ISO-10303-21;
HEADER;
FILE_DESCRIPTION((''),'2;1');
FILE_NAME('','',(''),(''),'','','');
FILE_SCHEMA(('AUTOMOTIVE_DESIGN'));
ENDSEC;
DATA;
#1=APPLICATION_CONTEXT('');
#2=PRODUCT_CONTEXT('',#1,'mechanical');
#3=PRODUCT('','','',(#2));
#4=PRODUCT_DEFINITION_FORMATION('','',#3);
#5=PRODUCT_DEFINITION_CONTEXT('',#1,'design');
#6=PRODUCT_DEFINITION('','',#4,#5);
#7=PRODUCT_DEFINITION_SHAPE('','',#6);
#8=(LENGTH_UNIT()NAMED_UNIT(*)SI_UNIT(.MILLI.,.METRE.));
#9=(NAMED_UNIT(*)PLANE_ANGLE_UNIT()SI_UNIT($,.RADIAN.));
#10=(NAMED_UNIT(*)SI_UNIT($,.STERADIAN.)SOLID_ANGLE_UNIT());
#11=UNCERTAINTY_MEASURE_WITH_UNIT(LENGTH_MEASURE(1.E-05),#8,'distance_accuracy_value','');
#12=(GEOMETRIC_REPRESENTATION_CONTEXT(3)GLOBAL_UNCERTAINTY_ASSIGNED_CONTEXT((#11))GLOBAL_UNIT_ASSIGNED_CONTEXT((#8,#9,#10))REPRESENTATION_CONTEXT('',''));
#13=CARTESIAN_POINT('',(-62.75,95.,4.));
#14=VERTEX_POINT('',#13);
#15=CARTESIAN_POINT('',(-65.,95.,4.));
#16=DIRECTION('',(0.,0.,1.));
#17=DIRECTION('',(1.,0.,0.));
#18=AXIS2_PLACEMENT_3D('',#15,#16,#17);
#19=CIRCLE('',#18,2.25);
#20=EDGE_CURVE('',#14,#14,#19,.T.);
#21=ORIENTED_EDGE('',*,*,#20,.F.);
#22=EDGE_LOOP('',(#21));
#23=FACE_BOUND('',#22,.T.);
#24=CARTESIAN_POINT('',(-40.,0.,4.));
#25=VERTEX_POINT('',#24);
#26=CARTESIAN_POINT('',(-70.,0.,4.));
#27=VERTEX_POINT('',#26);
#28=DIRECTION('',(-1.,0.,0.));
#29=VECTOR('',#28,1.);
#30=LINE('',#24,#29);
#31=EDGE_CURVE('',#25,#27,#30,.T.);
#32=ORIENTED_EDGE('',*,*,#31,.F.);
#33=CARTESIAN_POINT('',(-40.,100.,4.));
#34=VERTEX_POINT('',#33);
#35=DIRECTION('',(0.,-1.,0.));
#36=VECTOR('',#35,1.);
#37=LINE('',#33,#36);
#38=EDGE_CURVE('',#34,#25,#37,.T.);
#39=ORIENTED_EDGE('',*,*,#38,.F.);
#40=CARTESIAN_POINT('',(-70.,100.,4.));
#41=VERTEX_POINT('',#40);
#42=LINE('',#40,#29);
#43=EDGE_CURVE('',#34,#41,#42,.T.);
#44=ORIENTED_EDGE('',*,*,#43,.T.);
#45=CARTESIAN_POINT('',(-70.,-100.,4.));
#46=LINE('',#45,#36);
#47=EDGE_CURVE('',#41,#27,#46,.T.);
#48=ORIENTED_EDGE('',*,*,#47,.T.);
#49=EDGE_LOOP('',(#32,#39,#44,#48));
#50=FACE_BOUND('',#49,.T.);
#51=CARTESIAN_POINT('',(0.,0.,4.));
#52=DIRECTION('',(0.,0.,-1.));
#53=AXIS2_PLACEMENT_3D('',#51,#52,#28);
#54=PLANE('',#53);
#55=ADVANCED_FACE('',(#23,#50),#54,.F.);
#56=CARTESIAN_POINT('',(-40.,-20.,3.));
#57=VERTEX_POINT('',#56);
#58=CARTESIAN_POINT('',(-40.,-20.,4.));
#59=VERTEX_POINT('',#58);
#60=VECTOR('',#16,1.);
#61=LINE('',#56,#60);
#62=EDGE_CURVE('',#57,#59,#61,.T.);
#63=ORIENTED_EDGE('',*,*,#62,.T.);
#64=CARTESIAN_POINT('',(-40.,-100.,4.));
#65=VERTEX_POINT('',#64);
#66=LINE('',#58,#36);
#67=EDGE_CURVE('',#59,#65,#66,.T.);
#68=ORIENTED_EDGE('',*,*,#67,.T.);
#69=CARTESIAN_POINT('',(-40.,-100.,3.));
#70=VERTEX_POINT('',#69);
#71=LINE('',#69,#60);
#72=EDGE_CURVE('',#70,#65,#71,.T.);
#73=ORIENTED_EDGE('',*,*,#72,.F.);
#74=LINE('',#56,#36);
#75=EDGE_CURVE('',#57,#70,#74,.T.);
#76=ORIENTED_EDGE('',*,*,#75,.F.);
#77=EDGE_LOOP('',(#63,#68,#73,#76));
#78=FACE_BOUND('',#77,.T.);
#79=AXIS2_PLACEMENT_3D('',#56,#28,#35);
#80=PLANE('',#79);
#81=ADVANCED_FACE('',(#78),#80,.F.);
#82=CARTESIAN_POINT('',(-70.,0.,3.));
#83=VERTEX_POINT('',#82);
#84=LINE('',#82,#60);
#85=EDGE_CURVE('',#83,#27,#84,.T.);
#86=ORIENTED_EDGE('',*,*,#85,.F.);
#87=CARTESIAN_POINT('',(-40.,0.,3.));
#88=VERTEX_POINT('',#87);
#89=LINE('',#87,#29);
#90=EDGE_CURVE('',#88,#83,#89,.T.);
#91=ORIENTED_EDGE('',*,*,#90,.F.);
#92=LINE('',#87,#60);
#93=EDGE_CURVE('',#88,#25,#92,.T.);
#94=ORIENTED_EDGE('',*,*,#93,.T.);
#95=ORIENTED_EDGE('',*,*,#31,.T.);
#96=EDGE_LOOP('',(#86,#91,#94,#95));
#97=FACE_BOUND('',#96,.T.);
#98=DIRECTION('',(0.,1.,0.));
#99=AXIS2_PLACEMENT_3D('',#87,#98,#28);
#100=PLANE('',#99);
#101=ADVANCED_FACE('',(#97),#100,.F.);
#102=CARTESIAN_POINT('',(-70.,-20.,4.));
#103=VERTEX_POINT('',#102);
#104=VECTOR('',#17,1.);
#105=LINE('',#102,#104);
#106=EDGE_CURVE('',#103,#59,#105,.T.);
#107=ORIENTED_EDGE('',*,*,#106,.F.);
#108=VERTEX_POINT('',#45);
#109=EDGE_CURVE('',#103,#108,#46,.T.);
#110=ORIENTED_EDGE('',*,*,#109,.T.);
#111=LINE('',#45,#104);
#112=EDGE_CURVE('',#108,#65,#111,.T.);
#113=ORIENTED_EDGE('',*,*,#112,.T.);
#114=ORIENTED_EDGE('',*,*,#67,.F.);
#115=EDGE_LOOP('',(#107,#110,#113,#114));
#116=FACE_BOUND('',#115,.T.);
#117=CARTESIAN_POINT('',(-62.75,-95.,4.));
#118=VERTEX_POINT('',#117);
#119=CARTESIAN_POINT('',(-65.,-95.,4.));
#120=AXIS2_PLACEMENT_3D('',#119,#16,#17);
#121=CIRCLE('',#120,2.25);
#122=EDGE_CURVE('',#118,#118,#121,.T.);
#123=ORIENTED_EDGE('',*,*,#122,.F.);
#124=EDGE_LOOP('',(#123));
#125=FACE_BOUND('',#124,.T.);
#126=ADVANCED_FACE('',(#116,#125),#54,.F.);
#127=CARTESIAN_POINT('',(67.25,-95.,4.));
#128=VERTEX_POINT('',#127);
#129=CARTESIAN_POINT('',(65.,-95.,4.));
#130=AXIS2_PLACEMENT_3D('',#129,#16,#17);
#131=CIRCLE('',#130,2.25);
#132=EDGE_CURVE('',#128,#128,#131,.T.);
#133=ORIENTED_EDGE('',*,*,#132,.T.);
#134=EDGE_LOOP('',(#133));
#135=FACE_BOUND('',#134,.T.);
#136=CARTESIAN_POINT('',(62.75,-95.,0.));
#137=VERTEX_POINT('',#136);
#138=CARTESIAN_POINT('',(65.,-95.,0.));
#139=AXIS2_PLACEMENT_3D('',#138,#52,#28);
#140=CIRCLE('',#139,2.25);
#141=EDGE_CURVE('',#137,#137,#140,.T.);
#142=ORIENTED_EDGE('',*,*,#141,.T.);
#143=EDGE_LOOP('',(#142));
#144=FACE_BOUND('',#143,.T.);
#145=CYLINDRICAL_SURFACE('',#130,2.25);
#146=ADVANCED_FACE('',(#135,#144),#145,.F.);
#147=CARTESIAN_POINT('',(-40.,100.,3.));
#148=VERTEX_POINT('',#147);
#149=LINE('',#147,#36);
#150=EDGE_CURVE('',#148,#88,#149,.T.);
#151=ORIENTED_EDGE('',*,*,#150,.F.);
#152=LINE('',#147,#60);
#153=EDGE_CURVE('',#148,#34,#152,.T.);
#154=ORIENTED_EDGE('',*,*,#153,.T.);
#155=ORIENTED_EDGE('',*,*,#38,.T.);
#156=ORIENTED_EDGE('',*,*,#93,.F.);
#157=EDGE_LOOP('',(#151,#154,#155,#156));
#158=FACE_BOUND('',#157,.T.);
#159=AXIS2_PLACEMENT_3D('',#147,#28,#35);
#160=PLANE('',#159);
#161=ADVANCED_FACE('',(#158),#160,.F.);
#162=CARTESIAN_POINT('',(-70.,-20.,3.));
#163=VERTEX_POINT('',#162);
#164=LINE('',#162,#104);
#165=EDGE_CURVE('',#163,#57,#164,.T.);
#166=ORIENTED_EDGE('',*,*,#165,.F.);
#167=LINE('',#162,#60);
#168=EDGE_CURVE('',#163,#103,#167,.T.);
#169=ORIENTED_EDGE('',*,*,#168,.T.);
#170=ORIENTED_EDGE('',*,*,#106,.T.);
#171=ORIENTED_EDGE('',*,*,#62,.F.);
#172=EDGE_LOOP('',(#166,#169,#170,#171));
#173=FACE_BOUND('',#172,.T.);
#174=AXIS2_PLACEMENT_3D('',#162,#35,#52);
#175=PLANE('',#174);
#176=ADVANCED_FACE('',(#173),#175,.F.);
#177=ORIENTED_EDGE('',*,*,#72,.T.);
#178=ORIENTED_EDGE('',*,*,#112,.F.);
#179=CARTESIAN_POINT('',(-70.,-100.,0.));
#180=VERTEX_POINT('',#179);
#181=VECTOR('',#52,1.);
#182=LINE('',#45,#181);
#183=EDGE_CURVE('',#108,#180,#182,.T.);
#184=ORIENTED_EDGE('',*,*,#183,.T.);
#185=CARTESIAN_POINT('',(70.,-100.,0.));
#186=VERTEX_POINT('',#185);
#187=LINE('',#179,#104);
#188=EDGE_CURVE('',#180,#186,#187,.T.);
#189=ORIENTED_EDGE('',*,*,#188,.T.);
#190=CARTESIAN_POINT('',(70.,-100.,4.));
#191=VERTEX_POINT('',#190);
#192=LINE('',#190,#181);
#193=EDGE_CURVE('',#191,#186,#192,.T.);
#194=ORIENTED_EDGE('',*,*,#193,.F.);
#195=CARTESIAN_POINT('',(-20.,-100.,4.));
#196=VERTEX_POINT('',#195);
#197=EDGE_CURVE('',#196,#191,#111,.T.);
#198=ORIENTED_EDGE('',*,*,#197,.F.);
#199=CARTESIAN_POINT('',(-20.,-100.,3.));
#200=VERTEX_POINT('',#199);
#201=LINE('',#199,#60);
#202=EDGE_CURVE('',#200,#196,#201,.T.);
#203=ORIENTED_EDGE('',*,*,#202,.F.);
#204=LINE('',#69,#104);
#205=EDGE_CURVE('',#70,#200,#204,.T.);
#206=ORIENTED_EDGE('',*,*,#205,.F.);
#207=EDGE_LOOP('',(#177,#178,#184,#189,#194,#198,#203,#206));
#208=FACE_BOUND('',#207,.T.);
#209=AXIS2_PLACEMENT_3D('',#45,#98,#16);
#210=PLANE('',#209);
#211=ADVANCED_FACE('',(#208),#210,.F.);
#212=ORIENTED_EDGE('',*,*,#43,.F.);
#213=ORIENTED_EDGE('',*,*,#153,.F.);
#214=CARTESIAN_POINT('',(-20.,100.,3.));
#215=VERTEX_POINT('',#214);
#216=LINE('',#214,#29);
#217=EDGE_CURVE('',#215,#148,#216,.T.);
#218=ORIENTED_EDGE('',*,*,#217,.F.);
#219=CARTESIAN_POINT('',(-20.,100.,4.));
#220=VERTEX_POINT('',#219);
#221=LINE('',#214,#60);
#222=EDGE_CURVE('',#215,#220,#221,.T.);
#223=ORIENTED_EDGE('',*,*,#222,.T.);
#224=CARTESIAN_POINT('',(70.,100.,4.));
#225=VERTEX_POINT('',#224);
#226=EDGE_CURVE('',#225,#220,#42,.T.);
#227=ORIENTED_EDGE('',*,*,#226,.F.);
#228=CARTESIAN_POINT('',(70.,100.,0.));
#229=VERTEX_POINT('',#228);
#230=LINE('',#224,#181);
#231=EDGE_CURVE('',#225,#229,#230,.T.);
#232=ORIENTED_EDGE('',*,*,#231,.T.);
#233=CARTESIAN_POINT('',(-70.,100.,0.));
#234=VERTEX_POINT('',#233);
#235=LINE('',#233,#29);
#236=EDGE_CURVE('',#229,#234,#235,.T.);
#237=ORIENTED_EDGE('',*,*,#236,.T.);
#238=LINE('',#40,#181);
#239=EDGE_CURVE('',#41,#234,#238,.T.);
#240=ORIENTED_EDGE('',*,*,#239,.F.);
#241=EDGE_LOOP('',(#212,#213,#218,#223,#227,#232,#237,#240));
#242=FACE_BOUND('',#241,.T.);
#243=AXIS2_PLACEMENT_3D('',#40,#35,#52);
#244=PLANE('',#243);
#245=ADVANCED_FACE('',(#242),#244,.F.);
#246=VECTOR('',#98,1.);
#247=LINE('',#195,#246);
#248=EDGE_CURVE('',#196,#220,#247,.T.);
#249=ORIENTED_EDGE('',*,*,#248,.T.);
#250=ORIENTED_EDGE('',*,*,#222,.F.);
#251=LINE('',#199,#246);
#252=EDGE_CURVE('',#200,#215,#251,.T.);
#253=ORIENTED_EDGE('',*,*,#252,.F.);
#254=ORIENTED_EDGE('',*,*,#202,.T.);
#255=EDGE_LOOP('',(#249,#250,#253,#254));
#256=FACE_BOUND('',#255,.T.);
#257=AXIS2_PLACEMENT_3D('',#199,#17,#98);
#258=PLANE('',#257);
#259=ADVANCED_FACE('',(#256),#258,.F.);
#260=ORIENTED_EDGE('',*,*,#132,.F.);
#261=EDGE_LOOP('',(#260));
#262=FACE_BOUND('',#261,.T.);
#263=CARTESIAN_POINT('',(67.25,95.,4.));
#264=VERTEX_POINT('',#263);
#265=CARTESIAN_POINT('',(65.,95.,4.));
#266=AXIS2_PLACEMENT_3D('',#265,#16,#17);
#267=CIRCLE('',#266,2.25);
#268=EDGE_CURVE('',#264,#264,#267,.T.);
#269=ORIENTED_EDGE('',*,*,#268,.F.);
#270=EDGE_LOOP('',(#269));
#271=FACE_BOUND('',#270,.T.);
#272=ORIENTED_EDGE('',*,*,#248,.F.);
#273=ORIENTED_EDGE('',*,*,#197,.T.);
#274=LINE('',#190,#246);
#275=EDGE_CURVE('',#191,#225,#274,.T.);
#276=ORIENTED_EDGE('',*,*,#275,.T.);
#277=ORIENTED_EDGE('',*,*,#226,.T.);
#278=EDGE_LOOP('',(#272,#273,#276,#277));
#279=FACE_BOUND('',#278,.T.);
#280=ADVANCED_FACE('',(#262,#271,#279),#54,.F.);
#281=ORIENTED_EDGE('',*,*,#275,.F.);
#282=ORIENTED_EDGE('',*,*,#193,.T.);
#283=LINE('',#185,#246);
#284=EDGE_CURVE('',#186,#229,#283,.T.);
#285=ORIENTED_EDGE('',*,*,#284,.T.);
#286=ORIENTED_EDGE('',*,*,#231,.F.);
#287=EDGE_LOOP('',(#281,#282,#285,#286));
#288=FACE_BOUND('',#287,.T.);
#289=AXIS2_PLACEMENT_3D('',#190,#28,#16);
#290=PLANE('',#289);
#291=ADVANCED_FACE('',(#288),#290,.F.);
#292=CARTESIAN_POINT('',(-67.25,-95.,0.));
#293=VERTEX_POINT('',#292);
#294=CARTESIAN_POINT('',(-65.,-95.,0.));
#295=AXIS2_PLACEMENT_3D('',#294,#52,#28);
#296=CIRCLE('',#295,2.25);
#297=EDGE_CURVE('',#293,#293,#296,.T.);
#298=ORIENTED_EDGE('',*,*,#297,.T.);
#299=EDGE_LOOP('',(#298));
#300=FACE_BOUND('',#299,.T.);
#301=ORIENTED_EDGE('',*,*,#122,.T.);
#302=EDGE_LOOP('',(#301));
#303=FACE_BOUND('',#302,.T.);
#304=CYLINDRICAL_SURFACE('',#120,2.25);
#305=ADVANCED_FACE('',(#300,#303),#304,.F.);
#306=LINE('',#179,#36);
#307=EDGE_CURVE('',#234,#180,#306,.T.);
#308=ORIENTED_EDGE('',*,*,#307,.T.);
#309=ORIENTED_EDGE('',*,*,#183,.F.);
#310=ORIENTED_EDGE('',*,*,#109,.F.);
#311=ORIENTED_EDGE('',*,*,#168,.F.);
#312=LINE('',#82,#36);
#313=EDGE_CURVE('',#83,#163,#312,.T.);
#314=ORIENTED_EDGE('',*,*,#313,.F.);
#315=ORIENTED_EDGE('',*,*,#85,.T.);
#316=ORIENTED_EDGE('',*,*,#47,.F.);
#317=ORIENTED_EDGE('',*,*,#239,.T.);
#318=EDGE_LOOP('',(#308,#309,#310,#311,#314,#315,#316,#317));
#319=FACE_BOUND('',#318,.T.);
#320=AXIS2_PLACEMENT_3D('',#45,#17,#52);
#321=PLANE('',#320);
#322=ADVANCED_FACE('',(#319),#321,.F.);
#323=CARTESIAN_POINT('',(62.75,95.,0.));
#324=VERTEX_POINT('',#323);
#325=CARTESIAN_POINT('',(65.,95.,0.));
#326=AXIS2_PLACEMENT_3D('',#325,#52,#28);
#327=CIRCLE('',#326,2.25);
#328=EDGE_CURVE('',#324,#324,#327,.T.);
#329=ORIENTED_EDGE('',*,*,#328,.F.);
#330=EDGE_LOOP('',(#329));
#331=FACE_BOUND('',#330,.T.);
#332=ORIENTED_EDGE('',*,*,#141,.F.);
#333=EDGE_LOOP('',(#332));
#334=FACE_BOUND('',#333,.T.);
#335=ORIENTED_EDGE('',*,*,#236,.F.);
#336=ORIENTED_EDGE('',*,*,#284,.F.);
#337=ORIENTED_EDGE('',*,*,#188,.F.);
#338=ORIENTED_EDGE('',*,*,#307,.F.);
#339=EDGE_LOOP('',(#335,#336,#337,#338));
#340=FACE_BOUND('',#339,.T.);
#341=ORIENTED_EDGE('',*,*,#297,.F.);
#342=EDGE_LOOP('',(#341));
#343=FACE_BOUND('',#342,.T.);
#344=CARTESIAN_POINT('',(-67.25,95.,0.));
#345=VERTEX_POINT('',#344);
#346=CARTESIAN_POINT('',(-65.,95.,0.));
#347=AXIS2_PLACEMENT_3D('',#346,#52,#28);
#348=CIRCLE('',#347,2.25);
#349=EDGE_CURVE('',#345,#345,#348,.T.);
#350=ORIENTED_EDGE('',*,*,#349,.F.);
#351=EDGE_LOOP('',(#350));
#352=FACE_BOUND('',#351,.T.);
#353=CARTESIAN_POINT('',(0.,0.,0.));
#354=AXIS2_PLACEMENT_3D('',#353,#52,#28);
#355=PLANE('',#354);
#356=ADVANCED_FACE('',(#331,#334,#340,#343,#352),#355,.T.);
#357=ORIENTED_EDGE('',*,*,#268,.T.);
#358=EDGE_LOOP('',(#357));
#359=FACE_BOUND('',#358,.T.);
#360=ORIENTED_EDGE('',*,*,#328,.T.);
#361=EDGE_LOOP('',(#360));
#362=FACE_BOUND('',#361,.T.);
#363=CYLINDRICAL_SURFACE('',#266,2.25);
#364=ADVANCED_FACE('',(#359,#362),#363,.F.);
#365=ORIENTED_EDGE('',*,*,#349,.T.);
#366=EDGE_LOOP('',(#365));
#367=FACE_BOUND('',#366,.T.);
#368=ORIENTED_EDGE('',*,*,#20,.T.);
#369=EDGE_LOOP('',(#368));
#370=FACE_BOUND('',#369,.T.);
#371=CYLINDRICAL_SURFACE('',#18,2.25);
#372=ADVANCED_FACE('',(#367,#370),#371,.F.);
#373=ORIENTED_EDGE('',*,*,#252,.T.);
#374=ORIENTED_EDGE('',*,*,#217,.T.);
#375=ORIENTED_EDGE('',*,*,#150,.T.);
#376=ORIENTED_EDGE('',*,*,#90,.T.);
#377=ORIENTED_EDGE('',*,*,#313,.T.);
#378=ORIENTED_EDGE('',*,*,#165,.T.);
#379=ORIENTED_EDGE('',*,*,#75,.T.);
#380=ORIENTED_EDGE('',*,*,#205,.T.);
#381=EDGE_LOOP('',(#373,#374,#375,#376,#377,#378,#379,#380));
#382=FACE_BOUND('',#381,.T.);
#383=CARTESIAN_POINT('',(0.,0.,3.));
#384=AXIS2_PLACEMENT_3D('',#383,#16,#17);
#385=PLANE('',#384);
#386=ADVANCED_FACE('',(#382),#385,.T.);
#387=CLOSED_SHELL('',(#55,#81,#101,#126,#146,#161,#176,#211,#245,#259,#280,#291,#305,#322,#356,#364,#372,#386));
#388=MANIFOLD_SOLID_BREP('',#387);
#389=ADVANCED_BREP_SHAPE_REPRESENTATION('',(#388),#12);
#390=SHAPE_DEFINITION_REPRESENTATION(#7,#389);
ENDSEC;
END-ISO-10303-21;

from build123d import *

# Parameters (mm, degrees)
SKETCH1_W                      = 140
SKETCH1_H                      = 200
BODY_DEPTH                     = 4
CABLE_CANAL_DEPTH              = 1
MOUNTING_SCREW_HOLES_OUTLINE_R = 2.25
MOUNTING_SCREW_HOLES_DEPTH     = 4


# Read off the part's stored shape, not the designer's step: mounting_screw_holes
with BuildPart() as part:
    # Sketch1 → body (new body)
    with BuildSketch(Plane.XY):
        Rectangle(SKETCH1_W, SKETCH1_H)
    extrude(amount=BODY_DEPTH)

    # Sketch2 → cable_canal (cut)
    with BuildSketch(Plane.XY.offset(4)):
        Polygon((-40, 100), (-40, 0), (-70, 0), (-70, -20), (-40, -20), (-40, -100), (-20, -100), (-20, 100), align=None)
    extrude(amount=-CABLE_CANAL_DEPTH, mode=Mode.SUBTRACT)

    # mounting_screw_holes outline → mounting_screw_holes (cut)
    with BuildSketch(Plane.XY):
        with Locations((65, 95)):
            Circle(MOUNTING_SCREW_HOLES_OUTLINE_R)
        with Locations((-65, -95)):
            Circle(MOUNTING_SCREW_HOLES_OUTLINE_R)
        with Locations((65, -95)):
            Circle(MOUNTING_SCREW_HOLES_OUTLINE_R)
        with Locations((-65, 95)):
            Circle(MOUNTING_SCREW_HOLES_OUTLINE_R)
    extrude(amount=MOUNTING_SCREW_HOLES_DEPTH, mode=Mode.SUBTRACT)


solid = part.part
